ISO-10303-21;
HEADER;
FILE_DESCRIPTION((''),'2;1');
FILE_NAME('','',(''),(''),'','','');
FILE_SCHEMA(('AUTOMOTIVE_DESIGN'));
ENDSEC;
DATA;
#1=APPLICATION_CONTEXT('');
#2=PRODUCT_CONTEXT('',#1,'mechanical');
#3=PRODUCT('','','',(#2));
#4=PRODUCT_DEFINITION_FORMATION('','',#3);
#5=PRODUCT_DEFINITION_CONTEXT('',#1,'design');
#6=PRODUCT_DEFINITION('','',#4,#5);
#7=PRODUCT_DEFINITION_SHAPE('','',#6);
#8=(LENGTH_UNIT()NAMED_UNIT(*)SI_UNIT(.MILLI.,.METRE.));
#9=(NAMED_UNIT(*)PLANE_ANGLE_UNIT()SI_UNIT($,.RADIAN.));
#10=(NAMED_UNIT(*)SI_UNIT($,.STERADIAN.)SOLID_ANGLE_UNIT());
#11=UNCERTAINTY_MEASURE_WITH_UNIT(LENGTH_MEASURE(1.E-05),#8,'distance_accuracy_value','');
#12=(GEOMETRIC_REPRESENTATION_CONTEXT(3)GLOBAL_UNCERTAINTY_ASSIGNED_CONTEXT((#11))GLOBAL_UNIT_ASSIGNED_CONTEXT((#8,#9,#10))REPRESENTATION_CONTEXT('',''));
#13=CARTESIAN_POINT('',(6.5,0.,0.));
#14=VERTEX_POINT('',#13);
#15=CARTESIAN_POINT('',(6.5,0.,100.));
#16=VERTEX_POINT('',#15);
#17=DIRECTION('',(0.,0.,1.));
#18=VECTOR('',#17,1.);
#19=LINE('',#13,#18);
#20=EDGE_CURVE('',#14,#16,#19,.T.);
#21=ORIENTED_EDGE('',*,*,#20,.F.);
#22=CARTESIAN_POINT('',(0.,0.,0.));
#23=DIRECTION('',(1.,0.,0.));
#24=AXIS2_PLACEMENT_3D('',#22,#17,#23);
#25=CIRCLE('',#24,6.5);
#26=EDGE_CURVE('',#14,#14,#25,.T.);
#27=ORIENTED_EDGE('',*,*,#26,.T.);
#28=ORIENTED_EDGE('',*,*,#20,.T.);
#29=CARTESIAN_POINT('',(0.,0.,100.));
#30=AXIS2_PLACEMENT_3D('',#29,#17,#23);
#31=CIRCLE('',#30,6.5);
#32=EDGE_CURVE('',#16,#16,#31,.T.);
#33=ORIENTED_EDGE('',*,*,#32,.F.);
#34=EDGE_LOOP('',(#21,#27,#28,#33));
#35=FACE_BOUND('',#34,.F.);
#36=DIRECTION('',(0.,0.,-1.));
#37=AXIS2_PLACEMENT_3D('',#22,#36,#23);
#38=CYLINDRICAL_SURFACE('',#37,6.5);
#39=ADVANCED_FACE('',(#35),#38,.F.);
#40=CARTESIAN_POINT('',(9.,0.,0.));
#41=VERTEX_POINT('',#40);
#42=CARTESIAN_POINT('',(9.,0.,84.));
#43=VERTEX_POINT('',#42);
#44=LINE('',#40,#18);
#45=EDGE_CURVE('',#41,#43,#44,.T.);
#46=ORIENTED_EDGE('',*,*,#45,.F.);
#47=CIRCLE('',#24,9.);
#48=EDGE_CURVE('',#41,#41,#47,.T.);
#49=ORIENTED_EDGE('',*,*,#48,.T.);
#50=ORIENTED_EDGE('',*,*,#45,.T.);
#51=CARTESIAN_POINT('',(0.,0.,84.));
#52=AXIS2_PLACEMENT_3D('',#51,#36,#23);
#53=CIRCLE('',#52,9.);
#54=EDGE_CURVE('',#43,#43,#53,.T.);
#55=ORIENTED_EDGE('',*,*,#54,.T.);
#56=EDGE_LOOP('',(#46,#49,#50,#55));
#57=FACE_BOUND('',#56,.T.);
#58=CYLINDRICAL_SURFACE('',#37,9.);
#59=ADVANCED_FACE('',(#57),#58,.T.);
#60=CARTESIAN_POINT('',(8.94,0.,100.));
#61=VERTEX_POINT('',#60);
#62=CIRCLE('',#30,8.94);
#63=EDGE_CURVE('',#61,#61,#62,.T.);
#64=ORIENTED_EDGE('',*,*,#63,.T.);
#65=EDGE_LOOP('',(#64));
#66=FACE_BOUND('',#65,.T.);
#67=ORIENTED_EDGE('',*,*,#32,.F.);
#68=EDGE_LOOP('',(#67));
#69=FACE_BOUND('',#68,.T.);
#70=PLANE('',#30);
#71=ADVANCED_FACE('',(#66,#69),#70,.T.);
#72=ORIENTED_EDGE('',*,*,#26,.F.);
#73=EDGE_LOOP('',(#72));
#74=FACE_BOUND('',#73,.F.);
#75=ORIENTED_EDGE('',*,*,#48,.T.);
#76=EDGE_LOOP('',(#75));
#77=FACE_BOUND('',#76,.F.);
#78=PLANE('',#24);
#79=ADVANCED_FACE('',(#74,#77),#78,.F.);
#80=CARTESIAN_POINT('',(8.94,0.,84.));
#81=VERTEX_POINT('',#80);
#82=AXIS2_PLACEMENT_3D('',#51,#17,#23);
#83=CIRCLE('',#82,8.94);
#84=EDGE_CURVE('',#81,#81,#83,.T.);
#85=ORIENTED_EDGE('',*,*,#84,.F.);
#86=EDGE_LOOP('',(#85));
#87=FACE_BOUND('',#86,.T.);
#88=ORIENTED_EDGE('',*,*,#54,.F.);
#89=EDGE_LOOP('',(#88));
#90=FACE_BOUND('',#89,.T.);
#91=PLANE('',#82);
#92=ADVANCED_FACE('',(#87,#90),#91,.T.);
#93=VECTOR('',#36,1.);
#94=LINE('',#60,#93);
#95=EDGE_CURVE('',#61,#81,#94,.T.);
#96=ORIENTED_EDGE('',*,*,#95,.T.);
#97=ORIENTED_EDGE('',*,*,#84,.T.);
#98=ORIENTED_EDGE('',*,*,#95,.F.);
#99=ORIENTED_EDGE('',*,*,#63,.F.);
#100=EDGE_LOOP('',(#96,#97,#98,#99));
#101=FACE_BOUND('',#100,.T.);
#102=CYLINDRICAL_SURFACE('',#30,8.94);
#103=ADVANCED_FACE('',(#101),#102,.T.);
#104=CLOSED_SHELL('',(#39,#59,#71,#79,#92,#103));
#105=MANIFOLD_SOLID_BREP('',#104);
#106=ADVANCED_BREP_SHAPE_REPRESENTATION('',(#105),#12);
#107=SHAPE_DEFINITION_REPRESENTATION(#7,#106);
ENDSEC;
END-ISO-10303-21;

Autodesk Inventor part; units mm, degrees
ref_plane "YZ Plane" through (0, 0, 0) normal (1, 0, 0) x (0, 1, 0)
ref_plane "XZ Plane" through (0, 0, 0) normal (0, 1, 0) x (-1, 0, 0)
ref_plane "XY Plane" through (0, 0, 0) normal (0, 0, 1) x (1, 0, 0)
sketch "Sketch1" plane through (0, 0, 0) normal (0, 0, 1) x (1, 0, 0)
  circle A0 centre (0, 0) radius 9
  circle A1 centre (0, 0) radius 6.5
  dimension "d0" = 18
  dimension "d1" = 13
extrude "Extrusion1" add sketch "Sketch1" along normal blind 100
sketch "Sketch2" plane through (0, 0, 100) normal (0, 0, 1) x (1, 0, 0)
  circle A0 centre (0, 0) radius 8.94
  circle A1 centre (0, 0) radius 12.634
  dimension "d4" = 17.88
extrude "Extrusion2" cut sketch "Sketch2" against normal blind 16
thread "Thread1" size "M18x2.5" class "6g" standard "ANSI Metric M Profile" full length
properties part number "Connecting Rod" material "Aluminum 6061"
